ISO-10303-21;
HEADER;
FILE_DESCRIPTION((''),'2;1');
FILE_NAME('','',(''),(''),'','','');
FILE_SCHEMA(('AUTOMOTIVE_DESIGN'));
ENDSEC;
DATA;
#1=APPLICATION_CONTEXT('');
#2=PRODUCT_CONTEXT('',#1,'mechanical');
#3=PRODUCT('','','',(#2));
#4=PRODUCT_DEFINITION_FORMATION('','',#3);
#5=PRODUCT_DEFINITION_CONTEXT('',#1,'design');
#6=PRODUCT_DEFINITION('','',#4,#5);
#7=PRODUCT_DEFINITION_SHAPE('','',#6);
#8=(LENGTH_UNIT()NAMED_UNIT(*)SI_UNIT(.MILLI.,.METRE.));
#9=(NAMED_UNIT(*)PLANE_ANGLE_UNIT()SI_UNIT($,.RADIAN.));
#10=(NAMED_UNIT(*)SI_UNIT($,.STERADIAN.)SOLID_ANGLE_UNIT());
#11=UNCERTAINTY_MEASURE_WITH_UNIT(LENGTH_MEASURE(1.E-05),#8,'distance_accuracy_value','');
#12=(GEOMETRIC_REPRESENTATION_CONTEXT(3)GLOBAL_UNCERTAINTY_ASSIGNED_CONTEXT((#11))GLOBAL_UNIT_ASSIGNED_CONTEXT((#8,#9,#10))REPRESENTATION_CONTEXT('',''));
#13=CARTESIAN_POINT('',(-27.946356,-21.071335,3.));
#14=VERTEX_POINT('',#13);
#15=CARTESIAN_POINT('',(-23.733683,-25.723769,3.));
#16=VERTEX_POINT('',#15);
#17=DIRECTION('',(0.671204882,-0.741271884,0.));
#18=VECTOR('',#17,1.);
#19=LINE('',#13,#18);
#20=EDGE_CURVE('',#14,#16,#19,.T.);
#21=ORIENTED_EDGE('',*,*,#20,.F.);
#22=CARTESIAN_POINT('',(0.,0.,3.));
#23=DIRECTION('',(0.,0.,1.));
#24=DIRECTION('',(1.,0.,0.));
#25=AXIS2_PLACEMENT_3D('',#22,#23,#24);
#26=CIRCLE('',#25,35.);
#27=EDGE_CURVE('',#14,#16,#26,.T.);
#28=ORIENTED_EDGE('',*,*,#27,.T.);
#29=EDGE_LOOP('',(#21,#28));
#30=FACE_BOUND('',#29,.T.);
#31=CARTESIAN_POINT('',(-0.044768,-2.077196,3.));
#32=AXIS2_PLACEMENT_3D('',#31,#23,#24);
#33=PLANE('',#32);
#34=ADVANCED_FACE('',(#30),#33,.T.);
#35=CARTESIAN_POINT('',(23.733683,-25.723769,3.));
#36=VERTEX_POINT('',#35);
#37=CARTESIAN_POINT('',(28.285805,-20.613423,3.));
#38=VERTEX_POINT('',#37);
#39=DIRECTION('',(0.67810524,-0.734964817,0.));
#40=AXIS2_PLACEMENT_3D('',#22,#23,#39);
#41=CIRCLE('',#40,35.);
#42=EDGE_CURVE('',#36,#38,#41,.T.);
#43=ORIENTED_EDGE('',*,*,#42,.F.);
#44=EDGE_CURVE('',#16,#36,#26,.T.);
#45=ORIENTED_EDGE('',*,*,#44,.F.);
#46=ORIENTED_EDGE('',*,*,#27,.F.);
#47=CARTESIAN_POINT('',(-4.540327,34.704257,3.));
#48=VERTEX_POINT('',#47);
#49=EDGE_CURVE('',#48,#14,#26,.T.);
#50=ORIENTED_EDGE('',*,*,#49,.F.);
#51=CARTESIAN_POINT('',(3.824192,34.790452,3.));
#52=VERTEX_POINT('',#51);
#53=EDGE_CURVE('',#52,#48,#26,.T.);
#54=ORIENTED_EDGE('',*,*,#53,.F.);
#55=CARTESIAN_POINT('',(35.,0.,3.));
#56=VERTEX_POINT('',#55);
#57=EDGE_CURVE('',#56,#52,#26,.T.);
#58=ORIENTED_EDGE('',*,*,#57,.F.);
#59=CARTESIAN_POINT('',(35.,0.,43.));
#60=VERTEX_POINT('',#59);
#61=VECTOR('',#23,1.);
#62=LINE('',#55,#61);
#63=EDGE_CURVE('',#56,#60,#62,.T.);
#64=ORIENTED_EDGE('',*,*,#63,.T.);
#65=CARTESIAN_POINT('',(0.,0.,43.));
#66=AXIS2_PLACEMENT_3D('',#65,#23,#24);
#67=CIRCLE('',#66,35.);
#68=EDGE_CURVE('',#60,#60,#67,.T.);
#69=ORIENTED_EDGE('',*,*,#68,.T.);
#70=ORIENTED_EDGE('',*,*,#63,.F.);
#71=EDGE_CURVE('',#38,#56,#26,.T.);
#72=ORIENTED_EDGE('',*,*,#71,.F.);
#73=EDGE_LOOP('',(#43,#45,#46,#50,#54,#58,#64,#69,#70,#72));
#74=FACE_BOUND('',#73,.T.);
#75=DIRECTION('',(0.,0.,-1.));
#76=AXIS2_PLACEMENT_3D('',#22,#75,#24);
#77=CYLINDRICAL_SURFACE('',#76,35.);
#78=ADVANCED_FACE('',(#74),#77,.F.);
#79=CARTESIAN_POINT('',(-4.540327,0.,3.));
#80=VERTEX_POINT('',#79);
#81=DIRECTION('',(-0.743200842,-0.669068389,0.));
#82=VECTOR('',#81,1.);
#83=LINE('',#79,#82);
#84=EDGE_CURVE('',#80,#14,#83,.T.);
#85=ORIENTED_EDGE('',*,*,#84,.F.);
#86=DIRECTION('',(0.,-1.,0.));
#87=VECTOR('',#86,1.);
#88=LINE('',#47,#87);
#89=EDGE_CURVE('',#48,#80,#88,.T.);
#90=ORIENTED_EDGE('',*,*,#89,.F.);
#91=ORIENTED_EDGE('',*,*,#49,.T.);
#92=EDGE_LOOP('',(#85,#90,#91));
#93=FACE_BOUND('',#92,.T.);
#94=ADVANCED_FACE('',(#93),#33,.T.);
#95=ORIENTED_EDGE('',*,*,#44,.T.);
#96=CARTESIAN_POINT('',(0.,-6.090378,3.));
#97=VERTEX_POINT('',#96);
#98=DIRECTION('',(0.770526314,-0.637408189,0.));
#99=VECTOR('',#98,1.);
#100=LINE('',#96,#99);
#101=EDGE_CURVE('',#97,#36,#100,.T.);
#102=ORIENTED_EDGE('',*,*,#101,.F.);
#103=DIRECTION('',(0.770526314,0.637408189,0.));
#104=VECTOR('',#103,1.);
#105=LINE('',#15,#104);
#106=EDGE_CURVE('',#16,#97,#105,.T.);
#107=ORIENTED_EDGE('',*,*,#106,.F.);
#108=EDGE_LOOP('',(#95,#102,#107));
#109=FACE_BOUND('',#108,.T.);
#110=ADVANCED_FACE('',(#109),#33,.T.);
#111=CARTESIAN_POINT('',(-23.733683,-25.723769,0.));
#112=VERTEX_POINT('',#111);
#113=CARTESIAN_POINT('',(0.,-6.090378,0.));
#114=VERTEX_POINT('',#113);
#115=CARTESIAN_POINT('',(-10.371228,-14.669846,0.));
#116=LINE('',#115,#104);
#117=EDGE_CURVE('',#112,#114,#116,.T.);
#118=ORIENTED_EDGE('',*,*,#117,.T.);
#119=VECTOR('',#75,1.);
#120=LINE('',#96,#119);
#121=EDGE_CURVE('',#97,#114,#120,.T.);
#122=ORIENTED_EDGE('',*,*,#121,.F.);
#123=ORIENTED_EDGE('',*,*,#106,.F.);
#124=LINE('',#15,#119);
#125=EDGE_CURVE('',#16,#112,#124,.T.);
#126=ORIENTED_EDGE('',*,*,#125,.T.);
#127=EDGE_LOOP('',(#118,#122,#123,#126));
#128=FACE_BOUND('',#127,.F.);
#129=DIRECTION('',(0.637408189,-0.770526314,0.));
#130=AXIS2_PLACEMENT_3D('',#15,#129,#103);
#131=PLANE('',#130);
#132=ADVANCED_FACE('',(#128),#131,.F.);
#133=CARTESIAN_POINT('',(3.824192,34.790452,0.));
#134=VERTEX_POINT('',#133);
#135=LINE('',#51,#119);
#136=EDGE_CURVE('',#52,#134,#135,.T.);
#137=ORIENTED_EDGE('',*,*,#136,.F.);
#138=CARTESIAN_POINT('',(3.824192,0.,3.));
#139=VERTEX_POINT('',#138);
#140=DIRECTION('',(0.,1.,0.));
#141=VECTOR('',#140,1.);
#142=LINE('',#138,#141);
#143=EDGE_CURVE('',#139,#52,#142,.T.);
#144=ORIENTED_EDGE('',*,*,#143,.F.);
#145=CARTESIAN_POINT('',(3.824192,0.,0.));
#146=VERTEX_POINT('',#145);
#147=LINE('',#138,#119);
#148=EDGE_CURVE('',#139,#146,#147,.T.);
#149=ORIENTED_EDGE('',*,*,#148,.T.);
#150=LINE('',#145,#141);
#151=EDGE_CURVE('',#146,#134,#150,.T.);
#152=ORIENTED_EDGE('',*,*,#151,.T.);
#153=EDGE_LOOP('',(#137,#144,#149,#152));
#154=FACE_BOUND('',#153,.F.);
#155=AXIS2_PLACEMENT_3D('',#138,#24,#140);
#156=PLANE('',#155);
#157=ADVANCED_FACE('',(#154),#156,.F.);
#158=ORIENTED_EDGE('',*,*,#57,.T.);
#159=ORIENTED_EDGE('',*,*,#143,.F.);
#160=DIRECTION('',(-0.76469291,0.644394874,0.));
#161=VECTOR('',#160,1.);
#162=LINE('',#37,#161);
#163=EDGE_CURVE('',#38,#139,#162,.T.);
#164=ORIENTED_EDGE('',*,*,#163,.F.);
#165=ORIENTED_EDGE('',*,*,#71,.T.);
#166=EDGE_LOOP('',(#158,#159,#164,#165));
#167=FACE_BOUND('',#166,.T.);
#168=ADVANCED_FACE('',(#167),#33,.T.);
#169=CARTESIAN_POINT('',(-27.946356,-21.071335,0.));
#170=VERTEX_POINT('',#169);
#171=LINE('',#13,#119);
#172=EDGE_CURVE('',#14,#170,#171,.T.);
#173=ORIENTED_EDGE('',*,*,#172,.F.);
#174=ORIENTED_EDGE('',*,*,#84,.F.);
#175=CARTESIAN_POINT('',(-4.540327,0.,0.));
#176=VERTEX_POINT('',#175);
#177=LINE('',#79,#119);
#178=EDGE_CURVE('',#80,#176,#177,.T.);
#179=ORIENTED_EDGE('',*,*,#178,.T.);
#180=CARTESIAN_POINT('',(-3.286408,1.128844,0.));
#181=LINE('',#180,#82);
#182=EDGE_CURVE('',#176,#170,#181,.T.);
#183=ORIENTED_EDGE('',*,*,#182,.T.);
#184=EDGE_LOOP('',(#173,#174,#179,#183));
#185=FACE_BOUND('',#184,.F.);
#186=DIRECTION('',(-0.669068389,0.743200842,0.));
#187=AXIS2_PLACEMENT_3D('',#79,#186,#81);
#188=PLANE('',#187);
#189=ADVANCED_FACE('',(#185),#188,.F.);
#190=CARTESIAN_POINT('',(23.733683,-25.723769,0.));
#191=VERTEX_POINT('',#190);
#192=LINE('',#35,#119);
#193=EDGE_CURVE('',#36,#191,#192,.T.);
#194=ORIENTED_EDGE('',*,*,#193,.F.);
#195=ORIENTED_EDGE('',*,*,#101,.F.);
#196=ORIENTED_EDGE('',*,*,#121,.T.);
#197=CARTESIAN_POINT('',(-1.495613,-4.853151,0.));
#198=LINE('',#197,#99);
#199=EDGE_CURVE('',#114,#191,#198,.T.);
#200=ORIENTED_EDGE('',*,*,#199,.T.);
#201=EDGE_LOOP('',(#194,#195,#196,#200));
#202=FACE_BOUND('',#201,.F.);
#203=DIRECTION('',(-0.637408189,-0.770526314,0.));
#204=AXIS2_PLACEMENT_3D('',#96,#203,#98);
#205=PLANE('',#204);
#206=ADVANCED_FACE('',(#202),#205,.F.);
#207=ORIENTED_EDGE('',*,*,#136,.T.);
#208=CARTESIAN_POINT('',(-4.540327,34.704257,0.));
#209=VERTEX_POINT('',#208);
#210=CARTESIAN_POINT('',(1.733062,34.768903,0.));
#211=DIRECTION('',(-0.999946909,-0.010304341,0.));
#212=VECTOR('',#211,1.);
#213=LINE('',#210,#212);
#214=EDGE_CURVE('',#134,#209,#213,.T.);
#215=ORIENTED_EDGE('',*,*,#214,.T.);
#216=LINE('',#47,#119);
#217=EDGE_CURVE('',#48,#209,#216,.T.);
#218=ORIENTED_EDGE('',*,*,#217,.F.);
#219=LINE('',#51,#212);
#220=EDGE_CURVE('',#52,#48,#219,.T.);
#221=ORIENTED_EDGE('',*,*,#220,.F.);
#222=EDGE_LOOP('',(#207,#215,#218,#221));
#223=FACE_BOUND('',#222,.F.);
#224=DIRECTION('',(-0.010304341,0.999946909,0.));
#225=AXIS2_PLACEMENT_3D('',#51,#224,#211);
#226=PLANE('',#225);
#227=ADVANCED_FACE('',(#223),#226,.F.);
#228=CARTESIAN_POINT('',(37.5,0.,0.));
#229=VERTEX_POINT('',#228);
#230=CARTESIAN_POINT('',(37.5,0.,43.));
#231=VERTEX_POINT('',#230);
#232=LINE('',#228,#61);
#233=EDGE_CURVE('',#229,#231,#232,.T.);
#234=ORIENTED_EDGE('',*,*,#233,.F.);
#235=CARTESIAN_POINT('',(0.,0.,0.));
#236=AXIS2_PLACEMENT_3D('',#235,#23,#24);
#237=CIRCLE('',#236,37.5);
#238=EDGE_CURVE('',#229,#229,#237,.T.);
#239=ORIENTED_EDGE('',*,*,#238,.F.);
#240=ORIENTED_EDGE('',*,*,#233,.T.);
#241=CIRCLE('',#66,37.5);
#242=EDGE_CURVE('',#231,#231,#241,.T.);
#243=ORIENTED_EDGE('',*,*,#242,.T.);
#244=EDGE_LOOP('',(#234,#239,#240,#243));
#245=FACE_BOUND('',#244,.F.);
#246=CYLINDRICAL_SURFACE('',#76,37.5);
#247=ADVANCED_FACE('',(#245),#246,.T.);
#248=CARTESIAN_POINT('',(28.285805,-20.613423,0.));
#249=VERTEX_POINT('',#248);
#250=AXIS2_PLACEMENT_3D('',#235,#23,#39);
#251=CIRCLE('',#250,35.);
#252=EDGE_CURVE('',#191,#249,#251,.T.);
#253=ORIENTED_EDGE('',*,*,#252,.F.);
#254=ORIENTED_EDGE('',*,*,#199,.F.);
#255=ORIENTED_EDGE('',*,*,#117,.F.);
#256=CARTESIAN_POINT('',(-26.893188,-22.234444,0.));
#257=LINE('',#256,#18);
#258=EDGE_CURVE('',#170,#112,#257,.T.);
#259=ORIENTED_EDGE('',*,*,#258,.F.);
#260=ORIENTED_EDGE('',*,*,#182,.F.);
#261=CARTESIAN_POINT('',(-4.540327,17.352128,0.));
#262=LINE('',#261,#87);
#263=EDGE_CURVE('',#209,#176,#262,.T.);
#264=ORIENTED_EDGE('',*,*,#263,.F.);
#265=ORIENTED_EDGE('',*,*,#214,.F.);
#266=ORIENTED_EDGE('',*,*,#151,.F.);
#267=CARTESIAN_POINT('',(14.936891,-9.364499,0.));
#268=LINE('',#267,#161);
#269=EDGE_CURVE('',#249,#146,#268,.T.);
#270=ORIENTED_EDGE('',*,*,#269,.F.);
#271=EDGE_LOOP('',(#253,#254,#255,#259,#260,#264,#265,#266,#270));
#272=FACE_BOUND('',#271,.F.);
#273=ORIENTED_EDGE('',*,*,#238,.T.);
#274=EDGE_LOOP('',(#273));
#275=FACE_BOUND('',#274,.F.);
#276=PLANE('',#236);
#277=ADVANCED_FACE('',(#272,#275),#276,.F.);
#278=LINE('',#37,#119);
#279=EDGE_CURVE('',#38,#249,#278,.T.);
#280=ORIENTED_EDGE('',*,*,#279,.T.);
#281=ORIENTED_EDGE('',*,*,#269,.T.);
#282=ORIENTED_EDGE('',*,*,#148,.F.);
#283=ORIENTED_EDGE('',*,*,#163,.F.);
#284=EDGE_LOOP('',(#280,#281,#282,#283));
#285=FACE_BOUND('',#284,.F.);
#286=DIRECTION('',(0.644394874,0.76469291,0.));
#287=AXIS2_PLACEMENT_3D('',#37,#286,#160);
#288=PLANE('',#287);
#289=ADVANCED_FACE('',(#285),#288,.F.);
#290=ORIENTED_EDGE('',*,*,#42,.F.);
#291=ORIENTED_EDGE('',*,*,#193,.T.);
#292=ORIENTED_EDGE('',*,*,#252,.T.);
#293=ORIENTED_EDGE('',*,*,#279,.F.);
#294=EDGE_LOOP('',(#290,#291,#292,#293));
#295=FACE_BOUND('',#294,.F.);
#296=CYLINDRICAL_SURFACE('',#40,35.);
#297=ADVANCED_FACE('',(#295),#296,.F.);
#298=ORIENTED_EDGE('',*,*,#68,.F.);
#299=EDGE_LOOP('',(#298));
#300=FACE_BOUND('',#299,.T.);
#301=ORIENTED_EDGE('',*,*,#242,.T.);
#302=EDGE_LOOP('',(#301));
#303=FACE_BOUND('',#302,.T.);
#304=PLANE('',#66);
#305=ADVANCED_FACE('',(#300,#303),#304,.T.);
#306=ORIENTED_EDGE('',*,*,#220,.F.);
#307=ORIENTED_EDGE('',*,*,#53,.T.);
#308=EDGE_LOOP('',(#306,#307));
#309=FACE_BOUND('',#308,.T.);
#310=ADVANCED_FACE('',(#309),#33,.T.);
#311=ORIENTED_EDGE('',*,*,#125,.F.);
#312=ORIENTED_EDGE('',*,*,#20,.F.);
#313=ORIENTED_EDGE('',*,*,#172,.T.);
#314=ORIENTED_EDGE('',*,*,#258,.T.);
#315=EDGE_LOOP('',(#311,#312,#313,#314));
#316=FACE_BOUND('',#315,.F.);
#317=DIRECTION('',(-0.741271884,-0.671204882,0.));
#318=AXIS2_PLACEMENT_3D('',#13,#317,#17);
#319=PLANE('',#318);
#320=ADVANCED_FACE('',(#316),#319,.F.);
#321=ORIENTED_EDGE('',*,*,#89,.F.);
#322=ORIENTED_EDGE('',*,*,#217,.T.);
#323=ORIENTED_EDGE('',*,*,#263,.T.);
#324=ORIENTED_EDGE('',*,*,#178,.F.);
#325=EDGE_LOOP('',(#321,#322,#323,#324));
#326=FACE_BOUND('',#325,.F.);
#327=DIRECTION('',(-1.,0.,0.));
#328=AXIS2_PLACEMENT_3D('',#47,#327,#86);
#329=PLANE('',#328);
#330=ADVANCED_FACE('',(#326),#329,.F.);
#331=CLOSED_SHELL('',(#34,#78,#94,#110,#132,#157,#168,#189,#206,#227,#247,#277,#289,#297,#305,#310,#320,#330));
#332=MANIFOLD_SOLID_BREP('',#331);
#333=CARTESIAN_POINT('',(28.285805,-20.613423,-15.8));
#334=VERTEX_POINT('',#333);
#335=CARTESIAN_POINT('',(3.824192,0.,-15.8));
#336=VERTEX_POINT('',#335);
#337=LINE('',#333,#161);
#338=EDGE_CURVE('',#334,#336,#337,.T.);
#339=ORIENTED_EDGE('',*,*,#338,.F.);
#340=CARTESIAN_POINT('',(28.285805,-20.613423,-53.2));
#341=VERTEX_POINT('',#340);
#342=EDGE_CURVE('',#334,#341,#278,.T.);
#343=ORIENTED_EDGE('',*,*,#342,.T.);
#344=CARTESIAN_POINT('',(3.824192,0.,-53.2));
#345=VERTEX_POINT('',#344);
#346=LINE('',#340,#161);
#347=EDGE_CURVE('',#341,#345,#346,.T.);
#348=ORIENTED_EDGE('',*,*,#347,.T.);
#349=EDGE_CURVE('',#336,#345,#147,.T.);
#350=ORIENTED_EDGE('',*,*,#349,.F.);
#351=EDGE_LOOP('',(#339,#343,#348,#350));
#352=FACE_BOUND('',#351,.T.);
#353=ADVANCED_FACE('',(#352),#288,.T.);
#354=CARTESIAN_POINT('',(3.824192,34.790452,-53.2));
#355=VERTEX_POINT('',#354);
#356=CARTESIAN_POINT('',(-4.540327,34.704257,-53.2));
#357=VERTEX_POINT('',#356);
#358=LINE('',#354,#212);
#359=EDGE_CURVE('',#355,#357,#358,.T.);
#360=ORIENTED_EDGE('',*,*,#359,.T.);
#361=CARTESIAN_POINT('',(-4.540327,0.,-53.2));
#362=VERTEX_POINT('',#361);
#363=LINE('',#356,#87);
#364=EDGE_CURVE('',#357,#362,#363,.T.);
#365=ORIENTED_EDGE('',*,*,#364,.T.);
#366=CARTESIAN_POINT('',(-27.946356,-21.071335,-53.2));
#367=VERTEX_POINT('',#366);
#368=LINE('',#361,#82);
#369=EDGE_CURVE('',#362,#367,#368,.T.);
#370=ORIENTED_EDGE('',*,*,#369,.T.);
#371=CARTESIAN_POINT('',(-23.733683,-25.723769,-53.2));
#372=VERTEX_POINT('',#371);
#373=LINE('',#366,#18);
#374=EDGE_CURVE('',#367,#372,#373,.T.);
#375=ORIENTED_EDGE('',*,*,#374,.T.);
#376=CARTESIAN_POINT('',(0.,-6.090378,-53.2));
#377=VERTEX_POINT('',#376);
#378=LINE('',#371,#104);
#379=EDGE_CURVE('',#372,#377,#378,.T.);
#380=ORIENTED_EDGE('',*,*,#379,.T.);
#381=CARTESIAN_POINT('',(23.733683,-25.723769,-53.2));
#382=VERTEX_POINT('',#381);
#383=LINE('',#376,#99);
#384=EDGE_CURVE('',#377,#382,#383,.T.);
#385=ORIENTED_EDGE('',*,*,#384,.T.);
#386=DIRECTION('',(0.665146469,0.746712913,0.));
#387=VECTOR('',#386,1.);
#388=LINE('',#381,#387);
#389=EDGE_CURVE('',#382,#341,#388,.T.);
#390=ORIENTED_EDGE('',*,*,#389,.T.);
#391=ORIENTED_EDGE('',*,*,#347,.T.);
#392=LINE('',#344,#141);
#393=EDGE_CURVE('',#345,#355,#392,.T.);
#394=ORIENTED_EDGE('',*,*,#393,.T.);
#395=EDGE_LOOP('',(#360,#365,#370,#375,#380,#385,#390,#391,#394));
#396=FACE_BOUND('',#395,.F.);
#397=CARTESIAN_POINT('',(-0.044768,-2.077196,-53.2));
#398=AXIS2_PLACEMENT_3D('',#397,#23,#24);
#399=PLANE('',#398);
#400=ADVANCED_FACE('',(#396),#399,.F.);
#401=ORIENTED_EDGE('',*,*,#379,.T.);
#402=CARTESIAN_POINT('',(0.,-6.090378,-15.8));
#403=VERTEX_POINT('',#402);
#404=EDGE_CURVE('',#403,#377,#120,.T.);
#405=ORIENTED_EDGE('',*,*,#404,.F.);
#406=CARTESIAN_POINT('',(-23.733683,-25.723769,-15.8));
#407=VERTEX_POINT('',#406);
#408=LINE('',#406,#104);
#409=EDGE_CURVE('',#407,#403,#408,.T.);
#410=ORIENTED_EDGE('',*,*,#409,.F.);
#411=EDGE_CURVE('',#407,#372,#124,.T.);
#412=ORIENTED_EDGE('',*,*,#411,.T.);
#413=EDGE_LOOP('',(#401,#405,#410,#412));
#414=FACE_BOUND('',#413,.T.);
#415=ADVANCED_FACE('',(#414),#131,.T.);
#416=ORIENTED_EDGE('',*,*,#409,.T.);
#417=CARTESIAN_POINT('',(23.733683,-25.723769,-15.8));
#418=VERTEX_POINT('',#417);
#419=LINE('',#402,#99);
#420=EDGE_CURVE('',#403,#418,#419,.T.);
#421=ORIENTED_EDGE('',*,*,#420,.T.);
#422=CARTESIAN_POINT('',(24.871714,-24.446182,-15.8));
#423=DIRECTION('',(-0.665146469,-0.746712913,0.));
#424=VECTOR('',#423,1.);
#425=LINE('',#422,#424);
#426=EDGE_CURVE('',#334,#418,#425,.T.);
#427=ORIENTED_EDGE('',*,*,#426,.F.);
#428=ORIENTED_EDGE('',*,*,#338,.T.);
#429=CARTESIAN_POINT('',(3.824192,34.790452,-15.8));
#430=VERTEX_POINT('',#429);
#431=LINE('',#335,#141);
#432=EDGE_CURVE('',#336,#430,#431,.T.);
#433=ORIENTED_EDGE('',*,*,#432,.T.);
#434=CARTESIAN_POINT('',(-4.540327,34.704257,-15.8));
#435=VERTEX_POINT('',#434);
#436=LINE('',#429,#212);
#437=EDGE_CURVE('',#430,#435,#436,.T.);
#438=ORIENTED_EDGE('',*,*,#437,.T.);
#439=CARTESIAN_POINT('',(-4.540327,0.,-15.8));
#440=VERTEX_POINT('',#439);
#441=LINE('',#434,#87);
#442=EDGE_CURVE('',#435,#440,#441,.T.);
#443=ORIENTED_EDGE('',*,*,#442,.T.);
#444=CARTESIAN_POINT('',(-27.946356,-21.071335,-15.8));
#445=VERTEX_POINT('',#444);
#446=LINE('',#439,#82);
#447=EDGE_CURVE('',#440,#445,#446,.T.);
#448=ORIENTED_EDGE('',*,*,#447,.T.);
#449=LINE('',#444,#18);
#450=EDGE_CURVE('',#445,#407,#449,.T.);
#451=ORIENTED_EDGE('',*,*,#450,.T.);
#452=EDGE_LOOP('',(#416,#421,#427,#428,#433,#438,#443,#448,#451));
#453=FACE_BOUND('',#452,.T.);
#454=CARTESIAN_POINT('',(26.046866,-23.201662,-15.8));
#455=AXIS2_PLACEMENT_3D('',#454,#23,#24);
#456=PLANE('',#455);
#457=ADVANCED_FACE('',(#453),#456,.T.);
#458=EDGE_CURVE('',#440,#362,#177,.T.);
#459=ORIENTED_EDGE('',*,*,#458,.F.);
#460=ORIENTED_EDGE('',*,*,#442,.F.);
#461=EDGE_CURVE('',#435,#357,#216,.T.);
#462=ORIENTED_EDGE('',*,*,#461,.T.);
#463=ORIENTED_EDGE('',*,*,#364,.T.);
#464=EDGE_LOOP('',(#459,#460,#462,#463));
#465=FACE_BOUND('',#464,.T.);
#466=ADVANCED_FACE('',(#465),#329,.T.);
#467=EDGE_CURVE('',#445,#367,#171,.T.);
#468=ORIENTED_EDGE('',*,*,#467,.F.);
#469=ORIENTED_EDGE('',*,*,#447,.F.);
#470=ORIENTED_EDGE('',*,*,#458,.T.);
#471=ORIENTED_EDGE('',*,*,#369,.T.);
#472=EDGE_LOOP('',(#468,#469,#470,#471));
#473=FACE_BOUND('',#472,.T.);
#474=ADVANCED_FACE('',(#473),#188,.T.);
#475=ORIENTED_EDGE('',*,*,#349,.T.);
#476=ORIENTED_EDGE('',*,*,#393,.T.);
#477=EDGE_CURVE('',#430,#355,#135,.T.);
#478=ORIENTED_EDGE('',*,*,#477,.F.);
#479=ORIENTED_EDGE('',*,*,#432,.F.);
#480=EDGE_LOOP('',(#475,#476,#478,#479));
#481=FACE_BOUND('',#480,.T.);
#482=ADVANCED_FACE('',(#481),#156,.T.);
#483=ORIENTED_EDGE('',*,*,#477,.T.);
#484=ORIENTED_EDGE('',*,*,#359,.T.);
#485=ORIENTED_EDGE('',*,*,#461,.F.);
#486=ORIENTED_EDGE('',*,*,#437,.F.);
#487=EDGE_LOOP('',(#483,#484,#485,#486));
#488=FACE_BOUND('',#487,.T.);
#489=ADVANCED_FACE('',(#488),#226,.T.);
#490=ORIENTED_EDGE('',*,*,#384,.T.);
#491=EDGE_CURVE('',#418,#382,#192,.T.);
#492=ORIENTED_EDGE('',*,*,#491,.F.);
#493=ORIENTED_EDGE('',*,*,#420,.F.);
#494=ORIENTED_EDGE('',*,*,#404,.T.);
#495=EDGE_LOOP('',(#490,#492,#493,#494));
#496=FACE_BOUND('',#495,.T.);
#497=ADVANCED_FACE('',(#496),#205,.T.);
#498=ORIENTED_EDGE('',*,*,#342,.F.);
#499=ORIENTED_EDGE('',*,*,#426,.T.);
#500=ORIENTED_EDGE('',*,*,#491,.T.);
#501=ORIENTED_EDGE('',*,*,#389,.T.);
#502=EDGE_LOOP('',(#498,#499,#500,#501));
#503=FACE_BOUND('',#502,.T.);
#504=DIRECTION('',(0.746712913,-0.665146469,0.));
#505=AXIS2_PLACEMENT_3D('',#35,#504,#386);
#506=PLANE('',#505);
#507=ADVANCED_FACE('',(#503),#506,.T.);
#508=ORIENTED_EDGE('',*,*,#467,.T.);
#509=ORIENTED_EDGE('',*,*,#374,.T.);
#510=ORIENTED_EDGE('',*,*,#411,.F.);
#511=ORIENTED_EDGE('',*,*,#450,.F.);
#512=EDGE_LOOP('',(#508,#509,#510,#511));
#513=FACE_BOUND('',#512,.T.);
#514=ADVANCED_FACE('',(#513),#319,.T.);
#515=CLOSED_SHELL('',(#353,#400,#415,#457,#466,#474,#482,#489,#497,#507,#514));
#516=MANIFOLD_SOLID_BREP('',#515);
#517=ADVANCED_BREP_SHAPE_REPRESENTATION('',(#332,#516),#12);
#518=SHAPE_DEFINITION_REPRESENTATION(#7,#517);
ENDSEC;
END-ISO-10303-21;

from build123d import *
from build123d import SkipClean  # not in build123d's __all__

# Parameters (mm, degrees)
F0_R     = 37.5
F1_DEPTH = 3
F2_R     = 37.5
F2_R_2   = 35
F3_DEPTH = 40
F5_DEPTH = 56.2
F6_DEPTH = 18.8


with BuildPart() as f1:
    # F0 (on Top) → F1 (new body)
    with BuildSketch(Plane.XY):
        Circle(F0_R)
    extrude(amount=F1_DEPTH)

    # F2 (on face) → F3 (join)
    with BuildSketch(Plane.XY.offset(3)):
        Circle(F2_R)
        Circle(F2_R_2, mode=Mode.SUBTRACT)
    extrude(amount=F3_DEPTH)

    # F4 (on face) → F5 (join)
    with BuildSketch(Plane.XY.offset(3)):
        Polygon((3.8241918664, 34.7904520892), (-4.540327032, 34.7042566617), (-4.540327032, 5.5238307981), (-4.540327032, 0), (-27.9463561921, -21.0713354011), (-23.733683415, -25.7237686111), (0, -6.0903779231), (23.733683415, -25.7237686111), (28.2858054869, -20.6134230043), (3.8241918664, 0), align=None)
    extrude(amount=-F5_DEPTH)

    # F4 (on face) → F6 (cut)
    with BuildSketch(Plane.XY.offset(3)):
        with BuildLine():
            ThreePointArc((23.733683415, -25.7237686111), (26.1349519697, -23.2801264073), (28.2858054869, -20.6134230043))
            Line((28.2858054869, -20.6134230043), (23.733683415, -25.7237686111))
        make_face()
        Polygon((3.8241918664, 34.7904520892), (-4.540327032, 34.7042566617), (-4.540327032, 5.5238307981), (-4.540327032, 0), (-27.9463561921, -21.0713354011), (-23.733683415, -25.7237686111), (0, -6.0903779231), (23.733683415, -25.7237686111), (28.2858054869, -20.6134230043), (3.8241918664, 0), align=None)
    with SkipClean():  # cleaning this boolean's faces spoils the solid; the shape is the same uncleaned
        extrude(amount=-F6_DEPTH, mode=Mode.SUBTRACT)


solid = f1.part
